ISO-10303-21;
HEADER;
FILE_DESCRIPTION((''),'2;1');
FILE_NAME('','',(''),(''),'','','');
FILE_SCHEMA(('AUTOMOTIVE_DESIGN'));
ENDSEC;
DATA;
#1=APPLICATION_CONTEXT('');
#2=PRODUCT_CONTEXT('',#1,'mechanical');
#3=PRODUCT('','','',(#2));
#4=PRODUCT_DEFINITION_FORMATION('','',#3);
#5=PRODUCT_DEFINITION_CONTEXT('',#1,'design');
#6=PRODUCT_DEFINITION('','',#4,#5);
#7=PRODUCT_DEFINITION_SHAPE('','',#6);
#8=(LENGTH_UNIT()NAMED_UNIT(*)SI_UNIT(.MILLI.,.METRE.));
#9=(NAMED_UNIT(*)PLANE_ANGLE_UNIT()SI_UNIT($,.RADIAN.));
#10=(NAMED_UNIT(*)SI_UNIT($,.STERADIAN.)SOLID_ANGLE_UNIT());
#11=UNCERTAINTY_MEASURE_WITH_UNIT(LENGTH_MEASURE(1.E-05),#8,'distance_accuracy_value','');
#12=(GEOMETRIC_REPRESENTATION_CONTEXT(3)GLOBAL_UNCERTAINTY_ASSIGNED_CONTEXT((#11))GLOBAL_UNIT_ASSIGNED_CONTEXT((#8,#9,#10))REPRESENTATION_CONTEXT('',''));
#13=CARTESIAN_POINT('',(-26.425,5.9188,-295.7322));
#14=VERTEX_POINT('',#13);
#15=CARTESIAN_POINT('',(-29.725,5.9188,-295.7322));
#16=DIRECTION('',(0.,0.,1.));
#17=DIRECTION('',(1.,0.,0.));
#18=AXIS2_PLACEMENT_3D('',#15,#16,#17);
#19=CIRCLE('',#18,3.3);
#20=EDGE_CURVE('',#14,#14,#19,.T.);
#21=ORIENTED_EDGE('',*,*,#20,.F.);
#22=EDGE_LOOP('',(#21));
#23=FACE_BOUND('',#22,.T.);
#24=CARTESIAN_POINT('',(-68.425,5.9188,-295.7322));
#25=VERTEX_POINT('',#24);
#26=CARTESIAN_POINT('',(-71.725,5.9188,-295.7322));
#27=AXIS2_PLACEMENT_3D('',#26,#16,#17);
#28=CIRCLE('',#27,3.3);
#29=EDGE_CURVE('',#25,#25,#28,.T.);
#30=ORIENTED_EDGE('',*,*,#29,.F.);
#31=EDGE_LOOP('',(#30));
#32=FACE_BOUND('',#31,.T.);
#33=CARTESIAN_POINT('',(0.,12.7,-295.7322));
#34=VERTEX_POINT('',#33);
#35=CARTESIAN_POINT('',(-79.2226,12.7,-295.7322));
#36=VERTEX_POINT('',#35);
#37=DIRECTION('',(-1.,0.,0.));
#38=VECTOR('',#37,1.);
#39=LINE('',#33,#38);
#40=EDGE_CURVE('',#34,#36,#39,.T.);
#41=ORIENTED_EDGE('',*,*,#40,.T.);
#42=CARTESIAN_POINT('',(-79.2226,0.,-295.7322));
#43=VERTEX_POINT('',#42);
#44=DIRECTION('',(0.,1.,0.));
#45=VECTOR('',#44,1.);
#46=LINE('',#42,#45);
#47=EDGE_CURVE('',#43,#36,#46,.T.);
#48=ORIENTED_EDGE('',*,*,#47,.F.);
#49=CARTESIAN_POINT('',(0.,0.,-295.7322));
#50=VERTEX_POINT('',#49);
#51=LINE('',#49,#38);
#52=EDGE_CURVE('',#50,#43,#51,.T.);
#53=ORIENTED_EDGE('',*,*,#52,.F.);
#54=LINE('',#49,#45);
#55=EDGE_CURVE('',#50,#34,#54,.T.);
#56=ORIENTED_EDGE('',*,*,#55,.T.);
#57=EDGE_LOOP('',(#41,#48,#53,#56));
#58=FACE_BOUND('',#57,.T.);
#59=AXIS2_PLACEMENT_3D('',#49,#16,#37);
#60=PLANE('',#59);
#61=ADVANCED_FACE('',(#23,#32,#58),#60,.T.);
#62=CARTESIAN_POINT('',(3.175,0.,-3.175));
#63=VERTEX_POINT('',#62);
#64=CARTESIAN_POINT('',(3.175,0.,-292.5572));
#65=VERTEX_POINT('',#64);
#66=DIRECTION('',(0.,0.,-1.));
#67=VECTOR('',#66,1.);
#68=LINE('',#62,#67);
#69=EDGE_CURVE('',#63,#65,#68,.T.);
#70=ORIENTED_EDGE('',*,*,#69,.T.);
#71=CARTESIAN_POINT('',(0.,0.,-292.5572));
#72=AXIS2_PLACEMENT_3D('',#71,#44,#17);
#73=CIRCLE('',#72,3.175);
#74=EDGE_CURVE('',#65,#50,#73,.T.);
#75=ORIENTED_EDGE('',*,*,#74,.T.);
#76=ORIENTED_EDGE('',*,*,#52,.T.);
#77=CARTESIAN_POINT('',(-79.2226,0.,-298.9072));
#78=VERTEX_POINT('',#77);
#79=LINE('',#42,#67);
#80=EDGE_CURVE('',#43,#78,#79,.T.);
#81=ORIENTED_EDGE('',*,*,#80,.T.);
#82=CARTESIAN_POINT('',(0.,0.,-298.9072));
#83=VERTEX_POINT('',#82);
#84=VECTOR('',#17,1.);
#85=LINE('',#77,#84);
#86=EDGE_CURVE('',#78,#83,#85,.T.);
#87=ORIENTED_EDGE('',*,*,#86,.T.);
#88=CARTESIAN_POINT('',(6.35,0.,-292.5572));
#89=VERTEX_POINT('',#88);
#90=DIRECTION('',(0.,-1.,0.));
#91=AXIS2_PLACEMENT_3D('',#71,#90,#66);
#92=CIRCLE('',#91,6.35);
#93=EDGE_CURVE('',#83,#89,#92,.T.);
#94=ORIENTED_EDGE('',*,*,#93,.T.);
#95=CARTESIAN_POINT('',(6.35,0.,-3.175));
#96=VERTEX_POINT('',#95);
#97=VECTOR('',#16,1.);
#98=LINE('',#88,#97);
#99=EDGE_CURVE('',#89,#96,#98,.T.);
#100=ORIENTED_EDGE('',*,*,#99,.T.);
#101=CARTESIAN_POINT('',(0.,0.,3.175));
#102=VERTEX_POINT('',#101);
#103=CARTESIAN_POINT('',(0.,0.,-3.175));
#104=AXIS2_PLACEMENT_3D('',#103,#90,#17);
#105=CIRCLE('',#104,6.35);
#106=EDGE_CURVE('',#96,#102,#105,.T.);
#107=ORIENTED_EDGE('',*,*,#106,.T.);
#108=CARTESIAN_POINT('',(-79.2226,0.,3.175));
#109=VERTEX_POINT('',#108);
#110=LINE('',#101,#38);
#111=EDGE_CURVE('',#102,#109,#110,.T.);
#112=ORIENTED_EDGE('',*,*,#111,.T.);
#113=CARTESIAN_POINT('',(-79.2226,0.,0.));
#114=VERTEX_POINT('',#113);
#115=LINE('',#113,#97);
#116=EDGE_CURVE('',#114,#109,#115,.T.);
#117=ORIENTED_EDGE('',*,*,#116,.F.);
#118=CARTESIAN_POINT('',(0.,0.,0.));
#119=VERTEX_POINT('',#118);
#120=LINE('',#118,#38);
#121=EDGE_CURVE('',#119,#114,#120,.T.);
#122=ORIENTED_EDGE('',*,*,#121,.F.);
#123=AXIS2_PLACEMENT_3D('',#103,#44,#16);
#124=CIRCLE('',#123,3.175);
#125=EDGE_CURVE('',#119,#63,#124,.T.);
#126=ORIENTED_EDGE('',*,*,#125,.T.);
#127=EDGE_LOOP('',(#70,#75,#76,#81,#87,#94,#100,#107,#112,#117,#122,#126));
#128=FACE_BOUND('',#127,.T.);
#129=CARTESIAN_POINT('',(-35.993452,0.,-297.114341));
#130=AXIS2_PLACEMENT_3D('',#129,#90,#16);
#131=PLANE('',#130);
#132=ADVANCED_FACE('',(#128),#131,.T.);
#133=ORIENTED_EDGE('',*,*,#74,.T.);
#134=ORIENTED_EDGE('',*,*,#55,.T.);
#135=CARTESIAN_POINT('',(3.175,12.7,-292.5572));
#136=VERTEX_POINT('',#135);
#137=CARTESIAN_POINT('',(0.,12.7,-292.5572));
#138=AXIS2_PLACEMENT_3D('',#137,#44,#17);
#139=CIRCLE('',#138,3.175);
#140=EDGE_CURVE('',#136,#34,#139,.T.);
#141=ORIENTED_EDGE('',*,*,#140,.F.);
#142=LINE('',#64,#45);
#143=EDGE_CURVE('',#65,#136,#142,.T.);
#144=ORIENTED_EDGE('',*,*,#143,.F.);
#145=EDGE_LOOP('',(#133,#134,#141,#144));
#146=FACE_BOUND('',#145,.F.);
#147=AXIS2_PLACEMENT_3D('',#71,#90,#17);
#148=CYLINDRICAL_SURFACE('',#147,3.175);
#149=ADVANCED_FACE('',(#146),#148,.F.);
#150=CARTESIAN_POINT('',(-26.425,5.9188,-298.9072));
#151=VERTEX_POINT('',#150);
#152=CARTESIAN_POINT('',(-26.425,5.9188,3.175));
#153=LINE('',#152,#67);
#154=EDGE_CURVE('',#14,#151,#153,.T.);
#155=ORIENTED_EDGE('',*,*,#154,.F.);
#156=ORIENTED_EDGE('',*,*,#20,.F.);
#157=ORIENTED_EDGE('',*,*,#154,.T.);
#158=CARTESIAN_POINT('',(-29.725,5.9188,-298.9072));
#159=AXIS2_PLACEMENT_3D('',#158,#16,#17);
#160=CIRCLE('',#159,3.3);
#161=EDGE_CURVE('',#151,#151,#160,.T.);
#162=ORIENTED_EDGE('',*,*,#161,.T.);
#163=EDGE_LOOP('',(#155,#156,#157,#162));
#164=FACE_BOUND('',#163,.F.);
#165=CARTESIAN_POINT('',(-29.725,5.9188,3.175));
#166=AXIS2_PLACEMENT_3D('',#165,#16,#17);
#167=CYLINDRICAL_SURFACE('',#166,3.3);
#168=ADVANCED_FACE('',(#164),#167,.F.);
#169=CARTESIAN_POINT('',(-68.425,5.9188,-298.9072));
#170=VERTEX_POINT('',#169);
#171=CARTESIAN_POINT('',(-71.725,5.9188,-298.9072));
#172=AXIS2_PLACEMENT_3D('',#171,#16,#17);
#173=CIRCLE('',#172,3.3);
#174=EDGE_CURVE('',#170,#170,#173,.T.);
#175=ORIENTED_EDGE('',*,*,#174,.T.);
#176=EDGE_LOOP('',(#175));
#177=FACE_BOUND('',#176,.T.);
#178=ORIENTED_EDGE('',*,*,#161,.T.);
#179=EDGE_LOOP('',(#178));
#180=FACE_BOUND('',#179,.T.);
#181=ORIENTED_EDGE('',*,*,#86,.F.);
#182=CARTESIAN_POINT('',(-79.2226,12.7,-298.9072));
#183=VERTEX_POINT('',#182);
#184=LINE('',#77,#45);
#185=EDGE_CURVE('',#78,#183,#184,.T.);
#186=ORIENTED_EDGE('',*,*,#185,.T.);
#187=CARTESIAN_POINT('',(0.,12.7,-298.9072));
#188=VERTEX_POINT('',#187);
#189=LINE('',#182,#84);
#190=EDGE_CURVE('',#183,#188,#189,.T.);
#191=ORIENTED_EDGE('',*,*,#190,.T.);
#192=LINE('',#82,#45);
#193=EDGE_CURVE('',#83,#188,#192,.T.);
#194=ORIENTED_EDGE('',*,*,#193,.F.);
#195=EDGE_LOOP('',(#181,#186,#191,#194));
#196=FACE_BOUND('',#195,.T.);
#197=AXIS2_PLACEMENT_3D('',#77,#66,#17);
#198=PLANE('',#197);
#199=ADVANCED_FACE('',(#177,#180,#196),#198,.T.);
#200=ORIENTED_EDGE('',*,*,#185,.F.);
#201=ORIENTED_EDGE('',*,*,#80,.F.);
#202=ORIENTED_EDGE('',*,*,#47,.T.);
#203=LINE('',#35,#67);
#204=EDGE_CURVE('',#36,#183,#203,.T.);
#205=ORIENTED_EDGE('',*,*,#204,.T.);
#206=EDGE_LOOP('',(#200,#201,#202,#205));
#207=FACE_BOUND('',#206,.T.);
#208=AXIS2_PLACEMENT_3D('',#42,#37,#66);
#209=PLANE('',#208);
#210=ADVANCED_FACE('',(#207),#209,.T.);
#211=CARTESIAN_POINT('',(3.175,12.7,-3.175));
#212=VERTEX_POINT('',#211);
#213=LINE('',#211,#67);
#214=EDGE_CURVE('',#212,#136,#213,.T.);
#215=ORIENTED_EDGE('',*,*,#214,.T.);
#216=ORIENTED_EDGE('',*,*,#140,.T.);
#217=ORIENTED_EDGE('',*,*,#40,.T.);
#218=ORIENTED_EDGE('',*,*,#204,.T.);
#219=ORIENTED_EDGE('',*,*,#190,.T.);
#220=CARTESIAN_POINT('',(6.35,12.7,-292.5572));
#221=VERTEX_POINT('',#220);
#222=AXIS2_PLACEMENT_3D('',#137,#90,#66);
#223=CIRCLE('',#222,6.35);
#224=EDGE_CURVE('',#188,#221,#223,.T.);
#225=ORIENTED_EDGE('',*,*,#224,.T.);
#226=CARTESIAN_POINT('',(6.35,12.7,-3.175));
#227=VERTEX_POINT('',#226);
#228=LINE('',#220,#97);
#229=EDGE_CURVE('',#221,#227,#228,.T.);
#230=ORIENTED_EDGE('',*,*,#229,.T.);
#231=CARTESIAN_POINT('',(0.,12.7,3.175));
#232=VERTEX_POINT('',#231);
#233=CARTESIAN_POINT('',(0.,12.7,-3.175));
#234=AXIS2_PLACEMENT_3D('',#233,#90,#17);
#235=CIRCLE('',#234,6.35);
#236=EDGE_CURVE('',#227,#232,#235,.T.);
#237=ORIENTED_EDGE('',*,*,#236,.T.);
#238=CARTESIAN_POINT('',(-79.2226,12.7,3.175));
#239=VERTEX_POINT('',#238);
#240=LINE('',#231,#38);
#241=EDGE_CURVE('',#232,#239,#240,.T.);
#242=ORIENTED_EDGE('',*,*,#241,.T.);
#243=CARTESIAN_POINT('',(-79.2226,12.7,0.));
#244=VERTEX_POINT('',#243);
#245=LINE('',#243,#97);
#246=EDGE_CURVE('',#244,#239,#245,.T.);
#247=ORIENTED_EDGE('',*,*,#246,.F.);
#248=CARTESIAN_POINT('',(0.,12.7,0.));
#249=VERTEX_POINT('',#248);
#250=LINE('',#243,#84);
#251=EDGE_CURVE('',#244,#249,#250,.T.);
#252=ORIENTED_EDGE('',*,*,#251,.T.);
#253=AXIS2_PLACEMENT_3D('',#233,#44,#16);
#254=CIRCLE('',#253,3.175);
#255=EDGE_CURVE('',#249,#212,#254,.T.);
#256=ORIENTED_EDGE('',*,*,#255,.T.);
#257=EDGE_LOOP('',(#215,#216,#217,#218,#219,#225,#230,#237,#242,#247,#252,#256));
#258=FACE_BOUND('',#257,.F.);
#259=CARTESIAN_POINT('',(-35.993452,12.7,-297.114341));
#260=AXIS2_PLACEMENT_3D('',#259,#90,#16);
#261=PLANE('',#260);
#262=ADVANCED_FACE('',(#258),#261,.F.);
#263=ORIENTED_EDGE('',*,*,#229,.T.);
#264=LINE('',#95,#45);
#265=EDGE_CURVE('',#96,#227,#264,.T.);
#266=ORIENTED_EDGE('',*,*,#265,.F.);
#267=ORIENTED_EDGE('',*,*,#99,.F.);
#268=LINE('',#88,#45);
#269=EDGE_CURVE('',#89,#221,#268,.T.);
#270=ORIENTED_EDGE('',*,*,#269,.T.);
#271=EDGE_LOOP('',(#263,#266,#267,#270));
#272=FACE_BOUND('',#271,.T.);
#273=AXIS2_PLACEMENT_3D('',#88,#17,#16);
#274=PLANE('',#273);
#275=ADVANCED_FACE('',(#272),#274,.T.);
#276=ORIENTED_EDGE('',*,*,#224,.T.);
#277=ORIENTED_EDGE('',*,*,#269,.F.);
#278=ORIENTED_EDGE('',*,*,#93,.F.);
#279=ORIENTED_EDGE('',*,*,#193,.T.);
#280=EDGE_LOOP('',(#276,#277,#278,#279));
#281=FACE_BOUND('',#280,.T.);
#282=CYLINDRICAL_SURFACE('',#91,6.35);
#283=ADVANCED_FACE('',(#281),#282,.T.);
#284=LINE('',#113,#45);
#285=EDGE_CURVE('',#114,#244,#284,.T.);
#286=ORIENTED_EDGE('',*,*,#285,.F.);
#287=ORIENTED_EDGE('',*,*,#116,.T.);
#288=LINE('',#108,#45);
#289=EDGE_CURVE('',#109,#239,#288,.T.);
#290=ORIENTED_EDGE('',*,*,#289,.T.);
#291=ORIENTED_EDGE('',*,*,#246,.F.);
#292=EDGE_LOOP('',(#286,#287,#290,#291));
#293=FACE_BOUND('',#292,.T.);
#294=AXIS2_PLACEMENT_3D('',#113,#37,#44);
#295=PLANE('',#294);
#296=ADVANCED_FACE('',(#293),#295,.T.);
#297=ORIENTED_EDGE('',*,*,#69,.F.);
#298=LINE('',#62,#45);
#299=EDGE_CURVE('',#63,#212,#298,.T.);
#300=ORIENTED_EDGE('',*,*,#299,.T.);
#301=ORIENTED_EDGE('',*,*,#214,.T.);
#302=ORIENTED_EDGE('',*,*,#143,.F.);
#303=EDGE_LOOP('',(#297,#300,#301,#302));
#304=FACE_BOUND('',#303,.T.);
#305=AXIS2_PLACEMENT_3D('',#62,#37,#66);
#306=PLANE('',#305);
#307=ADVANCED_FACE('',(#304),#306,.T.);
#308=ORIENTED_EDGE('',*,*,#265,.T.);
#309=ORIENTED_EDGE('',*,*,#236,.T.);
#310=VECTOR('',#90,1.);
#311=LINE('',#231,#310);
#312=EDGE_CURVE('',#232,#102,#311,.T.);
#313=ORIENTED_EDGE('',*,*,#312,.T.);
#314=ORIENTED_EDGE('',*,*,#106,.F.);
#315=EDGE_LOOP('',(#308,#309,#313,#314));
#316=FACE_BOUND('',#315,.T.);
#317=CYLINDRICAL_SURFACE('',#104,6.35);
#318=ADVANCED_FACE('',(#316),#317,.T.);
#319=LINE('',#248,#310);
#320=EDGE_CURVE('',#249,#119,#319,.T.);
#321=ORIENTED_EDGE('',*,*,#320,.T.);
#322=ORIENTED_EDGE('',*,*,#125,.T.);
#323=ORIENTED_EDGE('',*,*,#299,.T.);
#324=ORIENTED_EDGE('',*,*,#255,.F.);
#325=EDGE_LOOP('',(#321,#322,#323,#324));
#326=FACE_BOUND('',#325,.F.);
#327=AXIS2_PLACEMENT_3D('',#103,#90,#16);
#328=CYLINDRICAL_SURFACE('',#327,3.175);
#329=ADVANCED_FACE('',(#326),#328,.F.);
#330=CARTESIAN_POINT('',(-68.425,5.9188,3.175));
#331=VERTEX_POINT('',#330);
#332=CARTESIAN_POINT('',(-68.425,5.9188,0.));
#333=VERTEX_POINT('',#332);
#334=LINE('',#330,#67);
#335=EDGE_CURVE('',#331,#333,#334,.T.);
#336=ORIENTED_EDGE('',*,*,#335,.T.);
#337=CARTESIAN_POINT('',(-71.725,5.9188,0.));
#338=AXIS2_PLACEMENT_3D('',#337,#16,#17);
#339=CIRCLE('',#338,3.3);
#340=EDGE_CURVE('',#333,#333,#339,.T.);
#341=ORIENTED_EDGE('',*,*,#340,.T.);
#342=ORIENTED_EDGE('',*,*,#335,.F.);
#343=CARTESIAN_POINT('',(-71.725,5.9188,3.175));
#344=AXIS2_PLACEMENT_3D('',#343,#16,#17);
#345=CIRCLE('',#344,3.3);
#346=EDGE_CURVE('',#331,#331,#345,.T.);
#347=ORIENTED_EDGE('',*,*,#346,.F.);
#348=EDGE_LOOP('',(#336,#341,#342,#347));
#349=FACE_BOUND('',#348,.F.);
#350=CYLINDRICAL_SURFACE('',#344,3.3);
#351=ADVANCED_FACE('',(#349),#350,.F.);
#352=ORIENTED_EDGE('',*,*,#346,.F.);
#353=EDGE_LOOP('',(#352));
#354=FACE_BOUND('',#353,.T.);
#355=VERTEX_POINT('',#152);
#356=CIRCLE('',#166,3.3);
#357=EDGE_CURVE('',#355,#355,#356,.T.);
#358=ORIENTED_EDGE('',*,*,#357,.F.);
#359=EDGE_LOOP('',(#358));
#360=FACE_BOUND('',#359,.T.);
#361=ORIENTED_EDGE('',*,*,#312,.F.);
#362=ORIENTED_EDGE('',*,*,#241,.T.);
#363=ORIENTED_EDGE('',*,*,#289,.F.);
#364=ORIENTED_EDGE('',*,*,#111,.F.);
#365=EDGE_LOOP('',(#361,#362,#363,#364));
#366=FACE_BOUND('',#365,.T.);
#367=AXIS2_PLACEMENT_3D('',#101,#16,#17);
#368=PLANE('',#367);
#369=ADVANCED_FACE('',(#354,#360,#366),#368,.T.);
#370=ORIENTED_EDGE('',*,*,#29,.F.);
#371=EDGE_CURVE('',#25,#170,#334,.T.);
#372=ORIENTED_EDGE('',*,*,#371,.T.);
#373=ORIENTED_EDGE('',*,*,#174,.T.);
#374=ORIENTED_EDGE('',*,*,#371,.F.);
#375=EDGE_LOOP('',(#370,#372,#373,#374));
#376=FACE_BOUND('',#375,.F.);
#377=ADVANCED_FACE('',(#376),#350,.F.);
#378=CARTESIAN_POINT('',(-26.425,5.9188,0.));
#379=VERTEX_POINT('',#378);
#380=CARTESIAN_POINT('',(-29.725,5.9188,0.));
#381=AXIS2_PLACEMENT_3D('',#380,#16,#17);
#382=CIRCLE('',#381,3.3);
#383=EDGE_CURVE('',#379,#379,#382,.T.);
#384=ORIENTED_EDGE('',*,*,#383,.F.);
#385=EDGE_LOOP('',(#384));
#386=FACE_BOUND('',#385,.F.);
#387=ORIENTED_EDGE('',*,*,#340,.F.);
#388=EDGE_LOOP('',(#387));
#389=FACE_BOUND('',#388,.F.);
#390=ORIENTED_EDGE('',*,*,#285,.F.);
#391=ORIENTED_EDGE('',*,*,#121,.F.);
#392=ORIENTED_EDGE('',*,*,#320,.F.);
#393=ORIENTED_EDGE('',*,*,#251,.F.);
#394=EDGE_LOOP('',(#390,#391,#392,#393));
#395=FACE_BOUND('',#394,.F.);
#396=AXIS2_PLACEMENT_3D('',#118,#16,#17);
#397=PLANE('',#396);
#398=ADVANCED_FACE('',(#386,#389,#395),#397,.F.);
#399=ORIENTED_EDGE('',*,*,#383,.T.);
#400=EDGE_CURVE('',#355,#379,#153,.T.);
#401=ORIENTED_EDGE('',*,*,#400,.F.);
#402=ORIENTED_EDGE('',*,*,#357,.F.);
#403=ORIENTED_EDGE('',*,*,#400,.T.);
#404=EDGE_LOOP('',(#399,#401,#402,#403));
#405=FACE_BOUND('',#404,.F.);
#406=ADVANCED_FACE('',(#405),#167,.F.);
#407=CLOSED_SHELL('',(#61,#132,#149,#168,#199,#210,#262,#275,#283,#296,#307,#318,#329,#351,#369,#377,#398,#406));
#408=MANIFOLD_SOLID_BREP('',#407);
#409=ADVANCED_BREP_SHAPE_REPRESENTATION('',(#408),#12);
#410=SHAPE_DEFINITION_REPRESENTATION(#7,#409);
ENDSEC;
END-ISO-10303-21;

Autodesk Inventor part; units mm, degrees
ref_plane "YZ Plane" through (0, 0, 0) normal (1, 0, 0) x (0, 1, 0)
ref_plane "XZ Plane" through (0, 0, 0) normal (0, 1, 0) x (-1, 0, 0)
ref_plane "XY Plane" through (0, 0, 0) normal (0, 0, 1) x (1, 0, 0)
sketch "Sketch1" plane through (0, 0, 0) normal (0, 0, 1) x (1, 0, 0)
  line L0 (0, 0) -> (-79.2226, 0)
  line L1 (-79.2226, 0) -> (-79.2226, 12.7)
  line L2 (-79.2226, 12.7) -> (0, 12.7)
  line L3 (0, 12.7) -> (0, 0)
  line L4 (0, 12.7) -> (-29.718, 12.7)
  line L5 (-79.2226, 12.7) -> (-71.7296, 12.7)
  dimension "d1" = 79.2226
  dimension "d2" = 12.7
  dimension "d5" = 7.493
extrude "Plate5" add sketch "Sketch1" along normal blind 3.175
sketch "Sketch6" plane through (3.175, 0, -3.175) normal (1, 0, 0) x (0, 1, 0)
  line L0 (12.7, 0) -> (0, 0)
  line L1 (0, 0) -> (0, -289.3822)
  line L2 (0, -289.3822) -> (12.7, -289.3822)
  line L3 (12.7, -289.3822) -> (12.7, 0)
edge flange "Flange4" height 295.7322 angle 90 thickness 3.175 bend radius 3.175 thickness toward (1, 0, 0) relief tear relief width 3.175 relief depth 1.5875 edges at (0, 6.35, 0) wall of the first edge with corners at (3.175, 12.7, -3.175) (3.175, 0, -3.175) (3.175, 0, -292.5572) (3.175, 12.7, -292.5572)
bend "Bend4"
corner "Corner4"
sketch "Sketch7" plane through (0, 0, -295.7322) normal (0, 0, -1) x (-1, 0, 0)
  line L0 (0, 12.7) -> (0, 0)
  line L1 (0, 0) -> (79.2226, 0)
  line L2 (79.2226, 0) -> (79.2226, 12.7)
  line L3 (79.2226, 12.7) -> (0, 12.7)
edge flange "Flange5" height 85.5726 angle 90 thickness 3.175 bend radius 3.175 thickness toward (0, 0, -1) relief tear relief width 3.175 relief depth 1.5875 edges at (3.175, 6.35, -292.5572) wall of the first edge with corners at (0, 12.7, -295.7322) (0, 0, -295.7322) (-79.2226, 0, -295.7322) (-79.2226, 12.7, -295.7322)
bend "Bend5"
corner "Corner5"
sketch "Sketch8" plane through (0, 0, 3.175) normal (0, 0, 1) x (1, 0, 0)
  circle A0 centre (-71.725, 5.9188) radius 3.3 projected
  circle A1 centre (-29.725, 5.9188) radius 3.3 projected
extrude "Extrusion2" cut sketch "Sketch8" against normal blind 2539974.6
equation "\"d43\" = BendReliefWidth"
equation "\"d44\" = BendReliefDepth"
equation "\"d45\" = MinimumRemnant"
equation "\"d46\" = BendRadius"
equation "\"d49\" = BendRadius"
equation "\"d50\" = CornerReliefSize"
equation "\"d51\" = GapSize"
equation "\"d52\" = JacobiRadiusSize"
equation "\"d53\" = BendReliefWidth"
equation "\"d54\" = BendReliefDepth"
equation "\"d55\" = MinimumRemnant"
equation "\"d56\" = BendRadius"
equation "\"d59\" = BendRadius"
equation "\"d60\" = CornerReliefSize"
equation "\"d61\" = GapSize"
equation "\"d62\" = JacobiRadiusSize"
equation "\"BendRadius\" = Thickness"
equation "\"BendReliefWidth\" = Thickness"
equation "\"BendReliefDepth\" = 0.5 * Thickness"
equation "\"CornerReliefSize\" = 4 * Thickness"
equation "\"MinimumRemnant\" = 2 * Thickness"
equation "\"TransitionRadius\" = BendRadius"
equation "\"JacobiRadiusSize\" = BendRadius"
equation "\"GapSize\" = Thickness"
equation "\"d8\" = BendRadius"
equation "\"d42\" = BendRadius"
equation "\"Thickness\" = 3.175"
properties part number "tie-together tier 2 wide" material "Aluminum 6061"
